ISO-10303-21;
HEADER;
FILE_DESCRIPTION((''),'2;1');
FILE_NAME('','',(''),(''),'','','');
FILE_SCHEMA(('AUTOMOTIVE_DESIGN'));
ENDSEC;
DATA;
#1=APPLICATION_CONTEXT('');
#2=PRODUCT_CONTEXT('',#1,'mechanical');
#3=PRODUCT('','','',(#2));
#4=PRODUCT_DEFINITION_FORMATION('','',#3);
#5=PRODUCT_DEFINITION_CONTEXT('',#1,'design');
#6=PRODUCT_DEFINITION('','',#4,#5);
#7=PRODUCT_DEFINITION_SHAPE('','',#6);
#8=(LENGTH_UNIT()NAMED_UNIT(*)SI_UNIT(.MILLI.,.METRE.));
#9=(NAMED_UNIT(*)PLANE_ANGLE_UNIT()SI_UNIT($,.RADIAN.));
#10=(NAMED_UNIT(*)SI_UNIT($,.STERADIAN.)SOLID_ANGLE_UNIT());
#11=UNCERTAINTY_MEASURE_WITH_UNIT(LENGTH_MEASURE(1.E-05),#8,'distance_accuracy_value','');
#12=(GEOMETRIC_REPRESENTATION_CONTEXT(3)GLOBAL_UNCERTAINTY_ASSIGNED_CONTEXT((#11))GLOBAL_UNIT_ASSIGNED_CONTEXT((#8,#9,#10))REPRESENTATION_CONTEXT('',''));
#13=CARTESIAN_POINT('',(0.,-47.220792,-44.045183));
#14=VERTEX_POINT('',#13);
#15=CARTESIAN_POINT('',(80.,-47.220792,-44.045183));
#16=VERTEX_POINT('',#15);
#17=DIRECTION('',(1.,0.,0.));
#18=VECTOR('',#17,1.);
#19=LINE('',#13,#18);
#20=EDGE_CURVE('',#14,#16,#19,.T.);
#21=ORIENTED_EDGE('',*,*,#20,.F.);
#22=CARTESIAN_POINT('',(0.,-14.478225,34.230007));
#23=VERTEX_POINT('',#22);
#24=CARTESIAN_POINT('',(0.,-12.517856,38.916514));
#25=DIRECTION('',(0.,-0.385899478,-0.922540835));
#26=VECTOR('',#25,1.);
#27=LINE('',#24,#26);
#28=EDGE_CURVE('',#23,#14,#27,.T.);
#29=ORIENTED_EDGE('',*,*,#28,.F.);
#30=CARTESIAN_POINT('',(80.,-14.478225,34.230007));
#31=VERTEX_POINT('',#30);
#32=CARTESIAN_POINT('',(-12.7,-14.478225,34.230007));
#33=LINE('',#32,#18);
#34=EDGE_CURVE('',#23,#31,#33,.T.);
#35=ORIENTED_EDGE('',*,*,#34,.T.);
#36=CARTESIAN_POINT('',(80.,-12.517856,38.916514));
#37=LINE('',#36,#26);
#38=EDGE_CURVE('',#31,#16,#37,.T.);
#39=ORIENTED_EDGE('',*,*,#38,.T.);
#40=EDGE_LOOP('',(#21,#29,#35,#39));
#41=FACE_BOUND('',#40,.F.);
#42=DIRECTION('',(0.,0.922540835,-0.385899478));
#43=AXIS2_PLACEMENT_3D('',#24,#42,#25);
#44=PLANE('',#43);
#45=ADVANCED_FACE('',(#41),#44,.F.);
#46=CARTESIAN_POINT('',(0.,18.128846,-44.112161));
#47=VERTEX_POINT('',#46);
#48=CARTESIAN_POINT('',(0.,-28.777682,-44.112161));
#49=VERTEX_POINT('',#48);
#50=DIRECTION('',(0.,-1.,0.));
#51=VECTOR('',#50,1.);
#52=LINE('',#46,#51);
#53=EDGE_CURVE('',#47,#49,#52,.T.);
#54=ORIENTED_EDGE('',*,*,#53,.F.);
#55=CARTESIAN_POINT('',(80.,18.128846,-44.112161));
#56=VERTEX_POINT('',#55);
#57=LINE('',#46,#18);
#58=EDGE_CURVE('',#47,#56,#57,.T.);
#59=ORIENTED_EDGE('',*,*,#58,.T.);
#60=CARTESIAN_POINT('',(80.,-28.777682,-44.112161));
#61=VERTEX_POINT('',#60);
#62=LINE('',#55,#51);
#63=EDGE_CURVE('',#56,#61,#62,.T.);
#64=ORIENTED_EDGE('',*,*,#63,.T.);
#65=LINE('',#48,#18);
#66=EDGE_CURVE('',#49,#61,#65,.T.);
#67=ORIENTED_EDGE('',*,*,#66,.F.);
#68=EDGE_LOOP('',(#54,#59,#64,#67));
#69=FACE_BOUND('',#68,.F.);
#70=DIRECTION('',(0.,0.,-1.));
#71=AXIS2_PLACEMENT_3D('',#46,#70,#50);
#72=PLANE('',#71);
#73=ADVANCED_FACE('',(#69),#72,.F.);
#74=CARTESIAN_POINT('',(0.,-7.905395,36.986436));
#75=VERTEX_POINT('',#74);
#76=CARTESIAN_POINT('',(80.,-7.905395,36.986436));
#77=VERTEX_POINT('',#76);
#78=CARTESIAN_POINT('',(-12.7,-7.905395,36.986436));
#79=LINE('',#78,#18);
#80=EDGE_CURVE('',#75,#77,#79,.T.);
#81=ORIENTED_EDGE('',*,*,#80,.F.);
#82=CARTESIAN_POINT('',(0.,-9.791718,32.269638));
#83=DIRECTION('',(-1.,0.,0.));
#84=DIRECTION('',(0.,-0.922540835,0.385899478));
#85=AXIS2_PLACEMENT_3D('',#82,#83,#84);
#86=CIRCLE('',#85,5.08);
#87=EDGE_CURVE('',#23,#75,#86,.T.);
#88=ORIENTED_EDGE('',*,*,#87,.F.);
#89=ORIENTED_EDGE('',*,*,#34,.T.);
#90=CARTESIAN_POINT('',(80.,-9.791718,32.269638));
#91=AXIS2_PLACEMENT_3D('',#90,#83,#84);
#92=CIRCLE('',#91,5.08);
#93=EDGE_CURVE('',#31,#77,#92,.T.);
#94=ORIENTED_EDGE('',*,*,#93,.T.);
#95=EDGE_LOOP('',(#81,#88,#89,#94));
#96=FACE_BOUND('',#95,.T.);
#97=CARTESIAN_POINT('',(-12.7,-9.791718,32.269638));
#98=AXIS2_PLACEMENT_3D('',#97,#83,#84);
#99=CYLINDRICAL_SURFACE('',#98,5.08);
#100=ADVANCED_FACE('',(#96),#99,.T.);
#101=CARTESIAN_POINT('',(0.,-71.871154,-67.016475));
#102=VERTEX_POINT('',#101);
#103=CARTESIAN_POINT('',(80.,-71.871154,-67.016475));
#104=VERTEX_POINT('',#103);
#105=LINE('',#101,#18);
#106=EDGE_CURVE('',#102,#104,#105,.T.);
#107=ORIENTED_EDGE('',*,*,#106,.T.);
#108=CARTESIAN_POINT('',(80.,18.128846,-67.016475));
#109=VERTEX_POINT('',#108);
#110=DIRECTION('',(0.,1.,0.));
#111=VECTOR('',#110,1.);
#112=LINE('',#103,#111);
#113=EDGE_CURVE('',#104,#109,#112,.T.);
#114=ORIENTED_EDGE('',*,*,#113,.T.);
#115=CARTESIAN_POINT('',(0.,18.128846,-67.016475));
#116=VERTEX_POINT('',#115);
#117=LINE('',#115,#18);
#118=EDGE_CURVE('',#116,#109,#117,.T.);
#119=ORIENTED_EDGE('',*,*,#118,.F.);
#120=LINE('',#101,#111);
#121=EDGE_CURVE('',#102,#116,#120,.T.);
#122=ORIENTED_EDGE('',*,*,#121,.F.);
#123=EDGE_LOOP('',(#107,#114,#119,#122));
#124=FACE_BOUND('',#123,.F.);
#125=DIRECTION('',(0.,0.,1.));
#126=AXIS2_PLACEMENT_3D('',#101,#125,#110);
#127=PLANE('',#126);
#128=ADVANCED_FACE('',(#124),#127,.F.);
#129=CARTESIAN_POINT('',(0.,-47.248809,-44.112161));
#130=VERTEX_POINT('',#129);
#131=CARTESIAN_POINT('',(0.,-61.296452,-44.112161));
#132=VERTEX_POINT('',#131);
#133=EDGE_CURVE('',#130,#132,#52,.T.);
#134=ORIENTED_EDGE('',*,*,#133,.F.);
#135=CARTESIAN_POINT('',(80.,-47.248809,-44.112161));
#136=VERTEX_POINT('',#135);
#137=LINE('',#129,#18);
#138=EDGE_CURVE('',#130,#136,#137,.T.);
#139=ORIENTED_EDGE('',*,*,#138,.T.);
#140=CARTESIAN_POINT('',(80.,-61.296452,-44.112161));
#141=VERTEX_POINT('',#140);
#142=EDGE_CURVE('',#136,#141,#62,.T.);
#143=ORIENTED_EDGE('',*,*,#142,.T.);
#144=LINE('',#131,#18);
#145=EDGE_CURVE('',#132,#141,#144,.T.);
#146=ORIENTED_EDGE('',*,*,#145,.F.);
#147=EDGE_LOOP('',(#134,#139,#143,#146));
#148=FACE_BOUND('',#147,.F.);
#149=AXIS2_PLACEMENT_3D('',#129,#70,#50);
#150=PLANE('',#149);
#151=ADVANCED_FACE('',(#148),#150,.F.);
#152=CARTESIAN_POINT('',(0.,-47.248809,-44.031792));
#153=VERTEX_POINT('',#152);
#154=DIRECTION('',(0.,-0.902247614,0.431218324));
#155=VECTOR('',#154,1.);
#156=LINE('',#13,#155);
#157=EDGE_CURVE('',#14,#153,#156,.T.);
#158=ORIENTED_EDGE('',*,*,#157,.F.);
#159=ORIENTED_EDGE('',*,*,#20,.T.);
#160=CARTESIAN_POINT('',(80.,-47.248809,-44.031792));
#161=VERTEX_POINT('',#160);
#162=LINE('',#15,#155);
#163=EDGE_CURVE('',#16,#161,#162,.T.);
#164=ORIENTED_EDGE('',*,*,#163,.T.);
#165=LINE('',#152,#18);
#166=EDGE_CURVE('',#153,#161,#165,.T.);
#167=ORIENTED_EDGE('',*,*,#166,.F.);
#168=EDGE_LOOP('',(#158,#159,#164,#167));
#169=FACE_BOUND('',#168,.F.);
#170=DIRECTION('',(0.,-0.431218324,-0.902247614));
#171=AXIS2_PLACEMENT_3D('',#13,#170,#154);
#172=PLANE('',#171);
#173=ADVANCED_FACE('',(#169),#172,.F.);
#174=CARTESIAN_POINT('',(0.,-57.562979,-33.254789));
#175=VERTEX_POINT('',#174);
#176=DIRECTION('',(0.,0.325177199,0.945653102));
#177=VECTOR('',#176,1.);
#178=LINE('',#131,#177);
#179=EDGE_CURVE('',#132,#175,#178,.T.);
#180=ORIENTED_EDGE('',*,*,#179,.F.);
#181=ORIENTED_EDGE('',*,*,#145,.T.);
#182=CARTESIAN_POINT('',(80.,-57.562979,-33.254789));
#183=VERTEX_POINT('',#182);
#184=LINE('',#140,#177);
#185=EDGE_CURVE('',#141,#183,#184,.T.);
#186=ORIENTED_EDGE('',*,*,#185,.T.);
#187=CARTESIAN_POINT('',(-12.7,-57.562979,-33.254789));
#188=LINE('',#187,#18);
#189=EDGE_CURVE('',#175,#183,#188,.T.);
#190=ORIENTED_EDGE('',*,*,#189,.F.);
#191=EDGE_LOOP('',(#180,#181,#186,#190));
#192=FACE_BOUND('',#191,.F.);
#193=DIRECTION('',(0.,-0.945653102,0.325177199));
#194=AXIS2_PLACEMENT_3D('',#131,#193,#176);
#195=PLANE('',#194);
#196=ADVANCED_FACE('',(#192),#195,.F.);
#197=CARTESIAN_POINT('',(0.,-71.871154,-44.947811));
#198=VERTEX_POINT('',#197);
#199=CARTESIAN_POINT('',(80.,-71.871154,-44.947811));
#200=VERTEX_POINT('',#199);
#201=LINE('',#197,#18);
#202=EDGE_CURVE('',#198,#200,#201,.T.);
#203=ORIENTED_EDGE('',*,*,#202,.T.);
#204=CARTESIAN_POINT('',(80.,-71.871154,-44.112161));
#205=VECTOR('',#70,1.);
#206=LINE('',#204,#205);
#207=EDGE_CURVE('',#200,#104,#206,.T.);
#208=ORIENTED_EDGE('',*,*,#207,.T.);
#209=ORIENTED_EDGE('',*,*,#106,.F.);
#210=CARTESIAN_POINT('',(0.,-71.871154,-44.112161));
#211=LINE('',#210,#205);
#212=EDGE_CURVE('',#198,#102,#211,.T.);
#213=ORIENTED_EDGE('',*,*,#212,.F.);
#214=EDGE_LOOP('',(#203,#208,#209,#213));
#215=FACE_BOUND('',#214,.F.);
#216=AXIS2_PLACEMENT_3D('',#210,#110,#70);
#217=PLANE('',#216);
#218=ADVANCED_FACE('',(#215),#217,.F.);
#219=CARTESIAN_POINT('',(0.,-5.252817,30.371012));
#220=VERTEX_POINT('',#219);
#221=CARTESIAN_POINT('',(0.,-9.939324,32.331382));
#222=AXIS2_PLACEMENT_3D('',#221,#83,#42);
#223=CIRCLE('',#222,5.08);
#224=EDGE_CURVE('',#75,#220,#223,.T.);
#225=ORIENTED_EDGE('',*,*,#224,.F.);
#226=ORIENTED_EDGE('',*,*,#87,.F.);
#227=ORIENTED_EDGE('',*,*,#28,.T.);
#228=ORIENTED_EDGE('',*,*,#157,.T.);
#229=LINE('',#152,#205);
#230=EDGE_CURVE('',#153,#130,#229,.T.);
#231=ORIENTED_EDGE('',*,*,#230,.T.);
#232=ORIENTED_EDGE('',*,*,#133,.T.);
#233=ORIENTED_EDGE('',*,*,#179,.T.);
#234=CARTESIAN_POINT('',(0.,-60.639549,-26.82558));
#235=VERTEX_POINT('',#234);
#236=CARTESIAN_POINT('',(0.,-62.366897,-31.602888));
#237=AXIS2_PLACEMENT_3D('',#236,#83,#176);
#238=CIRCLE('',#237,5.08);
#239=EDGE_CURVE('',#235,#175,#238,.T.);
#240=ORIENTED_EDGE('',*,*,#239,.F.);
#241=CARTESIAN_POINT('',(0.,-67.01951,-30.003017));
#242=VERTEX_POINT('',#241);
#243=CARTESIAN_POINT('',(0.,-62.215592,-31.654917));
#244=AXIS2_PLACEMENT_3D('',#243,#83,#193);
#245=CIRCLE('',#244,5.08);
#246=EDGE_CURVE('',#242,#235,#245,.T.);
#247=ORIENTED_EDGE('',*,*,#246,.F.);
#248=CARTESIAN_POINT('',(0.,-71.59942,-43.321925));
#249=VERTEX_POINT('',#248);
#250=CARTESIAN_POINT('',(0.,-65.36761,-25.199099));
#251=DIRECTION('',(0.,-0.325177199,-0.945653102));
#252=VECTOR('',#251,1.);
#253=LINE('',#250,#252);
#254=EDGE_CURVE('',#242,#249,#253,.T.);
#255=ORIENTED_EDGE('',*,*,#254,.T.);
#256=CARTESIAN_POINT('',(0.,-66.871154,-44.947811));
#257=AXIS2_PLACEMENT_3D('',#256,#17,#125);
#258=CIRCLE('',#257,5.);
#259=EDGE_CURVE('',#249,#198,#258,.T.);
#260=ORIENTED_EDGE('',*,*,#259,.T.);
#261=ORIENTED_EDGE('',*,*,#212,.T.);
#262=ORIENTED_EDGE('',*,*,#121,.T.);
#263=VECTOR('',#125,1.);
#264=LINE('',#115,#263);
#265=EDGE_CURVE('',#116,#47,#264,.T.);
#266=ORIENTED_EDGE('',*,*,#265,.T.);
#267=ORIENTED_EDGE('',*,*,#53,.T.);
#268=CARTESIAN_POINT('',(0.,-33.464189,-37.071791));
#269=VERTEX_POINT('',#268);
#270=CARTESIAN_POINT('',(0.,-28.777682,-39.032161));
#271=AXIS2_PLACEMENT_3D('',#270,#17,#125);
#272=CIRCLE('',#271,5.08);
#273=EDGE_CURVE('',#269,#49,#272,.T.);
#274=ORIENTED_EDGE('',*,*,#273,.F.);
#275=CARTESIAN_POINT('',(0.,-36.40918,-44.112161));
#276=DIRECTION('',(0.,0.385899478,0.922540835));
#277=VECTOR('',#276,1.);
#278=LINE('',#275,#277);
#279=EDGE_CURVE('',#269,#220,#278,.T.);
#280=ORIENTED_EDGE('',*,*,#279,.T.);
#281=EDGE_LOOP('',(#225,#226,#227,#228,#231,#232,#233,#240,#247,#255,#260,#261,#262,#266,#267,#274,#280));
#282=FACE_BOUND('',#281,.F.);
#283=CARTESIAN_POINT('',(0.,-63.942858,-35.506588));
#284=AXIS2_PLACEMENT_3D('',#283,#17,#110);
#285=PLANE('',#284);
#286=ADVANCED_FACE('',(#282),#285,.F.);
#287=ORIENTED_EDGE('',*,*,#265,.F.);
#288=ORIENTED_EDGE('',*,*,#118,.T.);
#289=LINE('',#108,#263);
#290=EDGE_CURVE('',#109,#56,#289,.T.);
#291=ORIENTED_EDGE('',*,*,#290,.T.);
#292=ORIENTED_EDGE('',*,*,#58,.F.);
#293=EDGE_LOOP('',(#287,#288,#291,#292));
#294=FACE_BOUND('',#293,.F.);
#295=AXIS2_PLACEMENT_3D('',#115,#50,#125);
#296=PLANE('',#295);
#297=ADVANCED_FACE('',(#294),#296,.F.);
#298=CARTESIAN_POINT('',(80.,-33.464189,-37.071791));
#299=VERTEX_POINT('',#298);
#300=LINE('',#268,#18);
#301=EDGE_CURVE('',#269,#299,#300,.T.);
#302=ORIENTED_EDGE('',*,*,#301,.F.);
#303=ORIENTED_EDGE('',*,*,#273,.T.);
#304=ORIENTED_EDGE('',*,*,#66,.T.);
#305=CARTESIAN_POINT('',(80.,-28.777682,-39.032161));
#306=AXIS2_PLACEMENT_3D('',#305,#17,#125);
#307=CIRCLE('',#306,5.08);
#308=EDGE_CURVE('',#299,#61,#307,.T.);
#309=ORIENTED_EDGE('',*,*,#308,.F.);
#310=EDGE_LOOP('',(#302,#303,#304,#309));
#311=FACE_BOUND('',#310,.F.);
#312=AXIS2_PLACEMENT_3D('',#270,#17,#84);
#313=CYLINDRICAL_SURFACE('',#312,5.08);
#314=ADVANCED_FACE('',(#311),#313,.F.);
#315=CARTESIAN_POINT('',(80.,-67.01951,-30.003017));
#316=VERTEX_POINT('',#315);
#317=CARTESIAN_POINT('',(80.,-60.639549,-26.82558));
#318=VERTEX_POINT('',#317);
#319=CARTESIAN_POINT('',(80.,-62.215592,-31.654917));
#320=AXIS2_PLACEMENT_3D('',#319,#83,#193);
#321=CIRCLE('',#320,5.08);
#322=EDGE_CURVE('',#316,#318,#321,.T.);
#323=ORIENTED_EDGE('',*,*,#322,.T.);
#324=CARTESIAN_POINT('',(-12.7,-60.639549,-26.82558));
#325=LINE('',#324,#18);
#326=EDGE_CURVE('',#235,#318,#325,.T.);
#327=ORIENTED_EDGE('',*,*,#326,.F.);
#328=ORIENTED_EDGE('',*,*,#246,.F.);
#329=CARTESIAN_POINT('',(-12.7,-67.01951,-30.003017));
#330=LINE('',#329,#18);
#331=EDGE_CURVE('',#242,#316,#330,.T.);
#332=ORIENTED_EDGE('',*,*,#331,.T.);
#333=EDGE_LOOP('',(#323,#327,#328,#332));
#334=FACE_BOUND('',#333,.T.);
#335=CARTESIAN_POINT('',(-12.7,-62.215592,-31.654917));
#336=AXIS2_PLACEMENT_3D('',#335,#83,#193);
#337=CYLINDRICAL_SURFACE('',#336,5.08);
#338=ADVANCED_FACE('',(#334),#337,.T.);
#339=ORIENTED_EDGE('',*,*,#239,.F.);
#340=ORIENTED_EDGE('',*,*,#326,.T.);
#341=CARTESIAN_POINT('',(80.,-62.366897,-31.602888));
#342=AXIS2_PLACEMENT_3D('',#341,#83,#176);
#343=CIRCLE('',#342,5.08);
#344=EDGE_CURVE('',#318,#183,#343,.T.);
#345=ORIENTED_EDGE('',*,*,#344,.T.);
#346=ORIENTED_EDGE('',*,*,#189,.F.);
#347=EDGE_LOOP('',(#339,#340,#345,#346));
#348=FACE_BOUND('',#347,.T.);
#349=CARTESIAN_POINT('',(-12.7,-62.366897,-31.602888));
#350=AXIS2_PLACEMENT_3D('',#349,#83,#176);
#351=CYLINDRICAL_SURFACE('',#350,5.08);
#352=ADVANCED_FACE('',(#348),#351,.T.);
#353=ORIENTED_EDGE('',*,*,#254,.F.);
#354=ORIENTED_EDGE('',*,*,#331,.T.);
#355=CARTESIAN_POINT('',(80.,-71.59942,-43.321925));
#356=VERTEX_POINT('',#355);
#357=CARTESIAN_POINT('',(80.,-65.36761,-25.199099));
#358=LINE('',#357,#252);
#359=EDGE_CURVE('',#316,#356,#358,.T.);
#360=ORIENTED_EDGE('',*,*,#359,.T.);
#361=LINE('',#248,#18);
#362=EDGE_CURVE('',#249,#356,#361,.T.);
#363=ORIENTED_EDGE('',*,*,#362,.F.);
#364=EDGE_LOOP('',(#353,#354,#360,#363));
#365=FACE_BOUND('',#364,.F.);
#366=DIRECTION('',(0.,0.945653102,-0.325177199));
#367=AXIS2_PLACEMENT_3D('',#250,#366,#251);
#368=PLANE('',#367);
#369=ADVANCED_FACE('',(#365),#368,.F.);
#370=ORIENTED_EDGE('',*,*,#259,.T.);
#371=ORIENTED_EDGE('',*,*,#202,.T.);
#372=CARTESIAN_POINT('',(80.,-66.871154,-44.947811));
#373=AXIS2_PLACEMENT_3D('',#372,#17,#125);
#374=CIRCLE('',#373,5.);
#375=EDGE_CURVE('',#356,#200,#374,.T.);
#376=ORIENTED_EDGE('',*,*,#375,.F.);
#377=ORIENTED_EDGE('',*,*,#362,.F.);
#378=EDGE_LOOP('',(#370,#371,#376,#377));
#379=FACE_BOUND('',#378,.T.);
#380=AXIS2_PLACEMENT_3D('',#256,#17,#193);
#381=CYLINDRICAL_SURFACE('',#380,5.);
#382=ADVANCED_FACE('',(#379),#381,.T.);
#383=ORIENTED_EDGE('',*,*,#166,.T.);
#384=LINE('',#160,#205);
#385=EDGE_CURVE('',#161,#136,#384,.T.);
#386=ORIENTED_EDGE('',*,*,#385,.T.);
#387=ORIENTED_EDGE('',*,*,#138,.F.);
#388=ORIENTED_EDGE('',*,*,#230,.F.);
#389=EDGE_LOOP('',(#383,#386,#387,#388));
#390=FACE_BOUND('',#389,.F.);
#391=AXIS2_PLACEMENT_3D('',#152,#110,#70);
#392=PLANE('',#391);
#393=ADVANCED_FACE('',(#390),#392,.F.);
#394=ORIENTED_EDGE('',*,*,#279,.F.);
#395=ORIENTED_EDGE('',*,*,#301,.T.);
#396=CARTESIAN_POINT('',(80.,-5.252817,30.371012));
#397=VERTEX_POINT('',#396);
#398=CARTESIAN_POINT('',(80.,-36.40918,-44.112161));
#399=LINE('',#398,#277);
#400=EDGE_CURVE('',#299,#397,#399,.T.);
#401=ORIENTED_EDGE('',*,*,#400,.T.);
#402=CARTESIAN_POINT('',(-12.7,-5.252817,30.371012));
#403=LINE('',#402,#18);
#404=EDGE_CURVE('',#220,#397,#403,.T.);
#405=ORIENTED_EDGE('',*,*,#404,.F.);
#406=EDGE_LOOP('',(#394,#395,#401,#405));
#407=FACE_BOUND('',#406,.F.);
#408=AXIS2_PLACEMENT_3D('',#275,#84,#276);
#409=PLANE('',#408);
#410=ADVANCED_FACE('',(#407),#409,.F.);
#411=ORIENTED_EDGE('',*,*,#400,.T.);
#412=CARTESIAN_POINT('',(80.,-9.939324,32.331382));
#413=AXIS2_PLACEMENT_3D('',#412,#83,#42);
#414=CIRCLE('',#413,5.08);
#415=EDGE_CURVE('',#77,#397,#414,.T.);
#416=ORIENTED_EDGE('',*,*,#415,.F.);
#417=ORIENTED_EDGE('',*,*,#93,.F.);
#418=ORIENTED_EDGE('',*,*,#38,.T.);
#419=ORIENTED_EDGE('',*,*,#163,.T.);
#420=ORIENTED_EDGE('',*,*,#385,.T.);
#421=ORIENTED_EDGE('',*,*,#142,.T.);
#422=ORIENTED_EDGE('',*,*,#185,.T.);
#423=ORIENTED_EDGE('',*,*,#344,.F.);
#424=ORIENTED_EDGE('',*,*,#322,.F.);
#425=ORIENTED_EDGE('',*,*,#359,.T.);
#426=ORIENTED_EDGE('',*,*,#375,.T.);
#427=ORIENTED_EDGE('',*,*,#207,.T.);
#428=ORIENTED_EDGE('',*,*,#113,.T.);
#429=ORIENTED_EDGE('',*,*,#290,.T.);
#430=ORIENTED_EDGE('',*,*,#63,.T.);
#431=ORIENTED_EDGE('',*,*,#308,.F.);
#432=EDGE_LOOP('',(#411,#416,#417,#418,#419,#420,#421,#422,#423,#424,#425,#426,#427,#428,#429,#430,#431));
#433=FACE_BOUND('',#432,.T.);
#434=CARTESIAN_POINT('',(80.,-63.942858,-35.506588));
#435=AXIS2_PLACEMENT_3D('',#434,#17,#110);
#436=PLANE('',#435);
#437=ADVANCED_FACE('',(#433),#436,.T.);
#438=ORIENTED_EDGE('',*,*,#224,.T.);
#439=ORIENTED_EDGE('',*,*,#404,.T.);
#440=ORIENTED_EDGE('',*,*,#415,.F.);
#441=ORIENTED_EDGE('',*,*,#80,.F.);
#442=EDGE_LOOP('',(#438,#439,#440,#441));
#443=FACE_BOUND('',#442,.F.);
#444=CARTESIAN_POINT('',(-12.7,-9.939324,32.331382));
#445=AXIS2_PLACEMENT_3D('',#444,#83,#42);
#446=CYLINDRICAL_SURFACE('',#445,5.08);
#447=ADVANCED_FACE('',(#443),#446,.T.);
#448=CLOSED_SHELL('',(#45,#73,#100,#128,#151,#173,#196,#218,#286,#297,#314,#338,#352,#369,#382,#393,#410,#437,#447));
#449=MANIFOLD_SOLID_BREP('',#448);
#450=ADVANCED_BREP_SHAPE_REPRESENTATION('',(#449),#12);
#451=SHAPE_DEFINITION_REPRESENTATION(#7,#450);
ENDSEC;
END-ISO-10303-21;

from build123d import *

# Parameters (mm, degrees)
F1_DEPTH    = 80
F2_R        = 5
F3_T1_DEPTH = 105.4
F4_T1_DEPTH = 105.4
F5_R        = 5.08


# Not quite as in the source:
# - a fillet or chamfer that OpenCascade refuses, or shapes differently, is made with other operations: its cross-section is extruded or revolved along the edge and cut away or added


with BuildPart() as f1:
    # F0 (on Right) → F1 (new body)
    with BuildSketch(Plane.YZ):
        Polygon((-65.3676100316, -25.1990987622), (-71.8711540103, -44.1121608019), (-61.2964517447, -44.1121608019), (-55.9110790118, -28.4508707515), align=None)
        Polygon((-61.2964517447, -44.1121608019), (-71.8711540103, -44.1121608019), (-71.8711540103, -67.0164749026), (18.1288459897, -67.0164749026), (18.1288459897, -44.1121608019), (-36.4091803752, -44.1121608019), (-47.0806523531, -44.1121608019), (-47.2488089486, -44.1121608019), align=None)
        Polygon((-47.220791987, -44.0451827606), (-47.2488089486, -44.1121608019), (-47.0806523531, -44.1121608019), align=None)
        Polygon((-47.2488089486, -44.031792393), (-47.2488089486, -44.1121608019), (-47.220791987, -44.0451827606), align=None)
        Polygon((-47.220791987, -44.0451827606), (-47.0806523531, -44.1121608019), (-36.4091803752, -44.1121608019), (-3.2924475957, 35.0575196106), (-12.5178559501, 38.9165143882), align=None)
    extrude(amount=F1_DEPTH)

    # F2
    f2_edges = [f1.edges().sort_by_distance(p)[0] for p in [
        (40, -71.871154, -44.112161),
    ]]
    fillet(f2_edges, radius=F2_R)

    # F3: fillet of radius 5.08 on 2 edges, made by hand

    # F3_s2 → F3_t1 (cut)
    with BuildSketch(Plane.YZ.offset(-12.7)):
        with BuildLine():
            ThreePointArc((-5.2528169427, 30.3710121665), (-5.2392727341, 34.2590522484), (-7.9789550397, 37.0178889576))
            Line((-7.9789550397, 37.0178889576), (-3.2924475957, 35.0575196106))
            Line((-3.2924475957, 35.0575196106), (-5.2528169427, 30.3710121665))
        make_face()
        with BuildLine():
            ThreePointArc((-14.4782252971, 34.2300069441), (-11.719388588, 36.9696892498), (-7.8313485061, 36.9561450412))
            Line((-7.8313485061, 36.9561450412), (-12.5178559501, 38.9165143882))
            Line((-12.5178559501, 38.9165143882), (-14.4782252971, 34.2300069441))
        make_face()
    extrude(amount=F3_T1_DEPTH, mode=Mode.SUBTRACT)

    # F4: fillet of radius 5.08 on 2 edges, made by hand

    # F4_s2 → F4_t1 (cut)
    with BuildSketch(Plane.YZ.offset(-12.7)):
        with BuildLine():
            ThreePointArc((-60.7149967698, -26.798970581), (-57.801944305, -29.3740753285), (-57.5629791823, -33.2547885096))
            Line((-57.5629791823, -33.2547885096), (-55.9110790118, -28.4508707515))
            Line((-55.9110790118, -28.4508707515), (-60.7149967698, -26.798970581))
        make_face()
        with BuildLine():
            ThreePointArc((-67.0195102022, -30.0030165203), (-64.4444054547, -27.0899640554), (-60.5636922735, -26.8509989328))
            Line((-60.5636922735, -26.8509989328), (-65.3676100316, -25.1990987622))
            Line((-65.3676100316, -25.1990987622), (-67.0195102022, -30.0030165203))
        make_face()
    extrude(amount=F4_T1_DEPTH, mode=Mode.SUBTRACT)

    # F5
    f5_edges = [f1.edges().sort_by_distance(p)[0] for p in [
        (40, -36.40918, -44.112161),
    ]]
    fillet(f5_edges, radius=F5_R)


solid = f1.part
